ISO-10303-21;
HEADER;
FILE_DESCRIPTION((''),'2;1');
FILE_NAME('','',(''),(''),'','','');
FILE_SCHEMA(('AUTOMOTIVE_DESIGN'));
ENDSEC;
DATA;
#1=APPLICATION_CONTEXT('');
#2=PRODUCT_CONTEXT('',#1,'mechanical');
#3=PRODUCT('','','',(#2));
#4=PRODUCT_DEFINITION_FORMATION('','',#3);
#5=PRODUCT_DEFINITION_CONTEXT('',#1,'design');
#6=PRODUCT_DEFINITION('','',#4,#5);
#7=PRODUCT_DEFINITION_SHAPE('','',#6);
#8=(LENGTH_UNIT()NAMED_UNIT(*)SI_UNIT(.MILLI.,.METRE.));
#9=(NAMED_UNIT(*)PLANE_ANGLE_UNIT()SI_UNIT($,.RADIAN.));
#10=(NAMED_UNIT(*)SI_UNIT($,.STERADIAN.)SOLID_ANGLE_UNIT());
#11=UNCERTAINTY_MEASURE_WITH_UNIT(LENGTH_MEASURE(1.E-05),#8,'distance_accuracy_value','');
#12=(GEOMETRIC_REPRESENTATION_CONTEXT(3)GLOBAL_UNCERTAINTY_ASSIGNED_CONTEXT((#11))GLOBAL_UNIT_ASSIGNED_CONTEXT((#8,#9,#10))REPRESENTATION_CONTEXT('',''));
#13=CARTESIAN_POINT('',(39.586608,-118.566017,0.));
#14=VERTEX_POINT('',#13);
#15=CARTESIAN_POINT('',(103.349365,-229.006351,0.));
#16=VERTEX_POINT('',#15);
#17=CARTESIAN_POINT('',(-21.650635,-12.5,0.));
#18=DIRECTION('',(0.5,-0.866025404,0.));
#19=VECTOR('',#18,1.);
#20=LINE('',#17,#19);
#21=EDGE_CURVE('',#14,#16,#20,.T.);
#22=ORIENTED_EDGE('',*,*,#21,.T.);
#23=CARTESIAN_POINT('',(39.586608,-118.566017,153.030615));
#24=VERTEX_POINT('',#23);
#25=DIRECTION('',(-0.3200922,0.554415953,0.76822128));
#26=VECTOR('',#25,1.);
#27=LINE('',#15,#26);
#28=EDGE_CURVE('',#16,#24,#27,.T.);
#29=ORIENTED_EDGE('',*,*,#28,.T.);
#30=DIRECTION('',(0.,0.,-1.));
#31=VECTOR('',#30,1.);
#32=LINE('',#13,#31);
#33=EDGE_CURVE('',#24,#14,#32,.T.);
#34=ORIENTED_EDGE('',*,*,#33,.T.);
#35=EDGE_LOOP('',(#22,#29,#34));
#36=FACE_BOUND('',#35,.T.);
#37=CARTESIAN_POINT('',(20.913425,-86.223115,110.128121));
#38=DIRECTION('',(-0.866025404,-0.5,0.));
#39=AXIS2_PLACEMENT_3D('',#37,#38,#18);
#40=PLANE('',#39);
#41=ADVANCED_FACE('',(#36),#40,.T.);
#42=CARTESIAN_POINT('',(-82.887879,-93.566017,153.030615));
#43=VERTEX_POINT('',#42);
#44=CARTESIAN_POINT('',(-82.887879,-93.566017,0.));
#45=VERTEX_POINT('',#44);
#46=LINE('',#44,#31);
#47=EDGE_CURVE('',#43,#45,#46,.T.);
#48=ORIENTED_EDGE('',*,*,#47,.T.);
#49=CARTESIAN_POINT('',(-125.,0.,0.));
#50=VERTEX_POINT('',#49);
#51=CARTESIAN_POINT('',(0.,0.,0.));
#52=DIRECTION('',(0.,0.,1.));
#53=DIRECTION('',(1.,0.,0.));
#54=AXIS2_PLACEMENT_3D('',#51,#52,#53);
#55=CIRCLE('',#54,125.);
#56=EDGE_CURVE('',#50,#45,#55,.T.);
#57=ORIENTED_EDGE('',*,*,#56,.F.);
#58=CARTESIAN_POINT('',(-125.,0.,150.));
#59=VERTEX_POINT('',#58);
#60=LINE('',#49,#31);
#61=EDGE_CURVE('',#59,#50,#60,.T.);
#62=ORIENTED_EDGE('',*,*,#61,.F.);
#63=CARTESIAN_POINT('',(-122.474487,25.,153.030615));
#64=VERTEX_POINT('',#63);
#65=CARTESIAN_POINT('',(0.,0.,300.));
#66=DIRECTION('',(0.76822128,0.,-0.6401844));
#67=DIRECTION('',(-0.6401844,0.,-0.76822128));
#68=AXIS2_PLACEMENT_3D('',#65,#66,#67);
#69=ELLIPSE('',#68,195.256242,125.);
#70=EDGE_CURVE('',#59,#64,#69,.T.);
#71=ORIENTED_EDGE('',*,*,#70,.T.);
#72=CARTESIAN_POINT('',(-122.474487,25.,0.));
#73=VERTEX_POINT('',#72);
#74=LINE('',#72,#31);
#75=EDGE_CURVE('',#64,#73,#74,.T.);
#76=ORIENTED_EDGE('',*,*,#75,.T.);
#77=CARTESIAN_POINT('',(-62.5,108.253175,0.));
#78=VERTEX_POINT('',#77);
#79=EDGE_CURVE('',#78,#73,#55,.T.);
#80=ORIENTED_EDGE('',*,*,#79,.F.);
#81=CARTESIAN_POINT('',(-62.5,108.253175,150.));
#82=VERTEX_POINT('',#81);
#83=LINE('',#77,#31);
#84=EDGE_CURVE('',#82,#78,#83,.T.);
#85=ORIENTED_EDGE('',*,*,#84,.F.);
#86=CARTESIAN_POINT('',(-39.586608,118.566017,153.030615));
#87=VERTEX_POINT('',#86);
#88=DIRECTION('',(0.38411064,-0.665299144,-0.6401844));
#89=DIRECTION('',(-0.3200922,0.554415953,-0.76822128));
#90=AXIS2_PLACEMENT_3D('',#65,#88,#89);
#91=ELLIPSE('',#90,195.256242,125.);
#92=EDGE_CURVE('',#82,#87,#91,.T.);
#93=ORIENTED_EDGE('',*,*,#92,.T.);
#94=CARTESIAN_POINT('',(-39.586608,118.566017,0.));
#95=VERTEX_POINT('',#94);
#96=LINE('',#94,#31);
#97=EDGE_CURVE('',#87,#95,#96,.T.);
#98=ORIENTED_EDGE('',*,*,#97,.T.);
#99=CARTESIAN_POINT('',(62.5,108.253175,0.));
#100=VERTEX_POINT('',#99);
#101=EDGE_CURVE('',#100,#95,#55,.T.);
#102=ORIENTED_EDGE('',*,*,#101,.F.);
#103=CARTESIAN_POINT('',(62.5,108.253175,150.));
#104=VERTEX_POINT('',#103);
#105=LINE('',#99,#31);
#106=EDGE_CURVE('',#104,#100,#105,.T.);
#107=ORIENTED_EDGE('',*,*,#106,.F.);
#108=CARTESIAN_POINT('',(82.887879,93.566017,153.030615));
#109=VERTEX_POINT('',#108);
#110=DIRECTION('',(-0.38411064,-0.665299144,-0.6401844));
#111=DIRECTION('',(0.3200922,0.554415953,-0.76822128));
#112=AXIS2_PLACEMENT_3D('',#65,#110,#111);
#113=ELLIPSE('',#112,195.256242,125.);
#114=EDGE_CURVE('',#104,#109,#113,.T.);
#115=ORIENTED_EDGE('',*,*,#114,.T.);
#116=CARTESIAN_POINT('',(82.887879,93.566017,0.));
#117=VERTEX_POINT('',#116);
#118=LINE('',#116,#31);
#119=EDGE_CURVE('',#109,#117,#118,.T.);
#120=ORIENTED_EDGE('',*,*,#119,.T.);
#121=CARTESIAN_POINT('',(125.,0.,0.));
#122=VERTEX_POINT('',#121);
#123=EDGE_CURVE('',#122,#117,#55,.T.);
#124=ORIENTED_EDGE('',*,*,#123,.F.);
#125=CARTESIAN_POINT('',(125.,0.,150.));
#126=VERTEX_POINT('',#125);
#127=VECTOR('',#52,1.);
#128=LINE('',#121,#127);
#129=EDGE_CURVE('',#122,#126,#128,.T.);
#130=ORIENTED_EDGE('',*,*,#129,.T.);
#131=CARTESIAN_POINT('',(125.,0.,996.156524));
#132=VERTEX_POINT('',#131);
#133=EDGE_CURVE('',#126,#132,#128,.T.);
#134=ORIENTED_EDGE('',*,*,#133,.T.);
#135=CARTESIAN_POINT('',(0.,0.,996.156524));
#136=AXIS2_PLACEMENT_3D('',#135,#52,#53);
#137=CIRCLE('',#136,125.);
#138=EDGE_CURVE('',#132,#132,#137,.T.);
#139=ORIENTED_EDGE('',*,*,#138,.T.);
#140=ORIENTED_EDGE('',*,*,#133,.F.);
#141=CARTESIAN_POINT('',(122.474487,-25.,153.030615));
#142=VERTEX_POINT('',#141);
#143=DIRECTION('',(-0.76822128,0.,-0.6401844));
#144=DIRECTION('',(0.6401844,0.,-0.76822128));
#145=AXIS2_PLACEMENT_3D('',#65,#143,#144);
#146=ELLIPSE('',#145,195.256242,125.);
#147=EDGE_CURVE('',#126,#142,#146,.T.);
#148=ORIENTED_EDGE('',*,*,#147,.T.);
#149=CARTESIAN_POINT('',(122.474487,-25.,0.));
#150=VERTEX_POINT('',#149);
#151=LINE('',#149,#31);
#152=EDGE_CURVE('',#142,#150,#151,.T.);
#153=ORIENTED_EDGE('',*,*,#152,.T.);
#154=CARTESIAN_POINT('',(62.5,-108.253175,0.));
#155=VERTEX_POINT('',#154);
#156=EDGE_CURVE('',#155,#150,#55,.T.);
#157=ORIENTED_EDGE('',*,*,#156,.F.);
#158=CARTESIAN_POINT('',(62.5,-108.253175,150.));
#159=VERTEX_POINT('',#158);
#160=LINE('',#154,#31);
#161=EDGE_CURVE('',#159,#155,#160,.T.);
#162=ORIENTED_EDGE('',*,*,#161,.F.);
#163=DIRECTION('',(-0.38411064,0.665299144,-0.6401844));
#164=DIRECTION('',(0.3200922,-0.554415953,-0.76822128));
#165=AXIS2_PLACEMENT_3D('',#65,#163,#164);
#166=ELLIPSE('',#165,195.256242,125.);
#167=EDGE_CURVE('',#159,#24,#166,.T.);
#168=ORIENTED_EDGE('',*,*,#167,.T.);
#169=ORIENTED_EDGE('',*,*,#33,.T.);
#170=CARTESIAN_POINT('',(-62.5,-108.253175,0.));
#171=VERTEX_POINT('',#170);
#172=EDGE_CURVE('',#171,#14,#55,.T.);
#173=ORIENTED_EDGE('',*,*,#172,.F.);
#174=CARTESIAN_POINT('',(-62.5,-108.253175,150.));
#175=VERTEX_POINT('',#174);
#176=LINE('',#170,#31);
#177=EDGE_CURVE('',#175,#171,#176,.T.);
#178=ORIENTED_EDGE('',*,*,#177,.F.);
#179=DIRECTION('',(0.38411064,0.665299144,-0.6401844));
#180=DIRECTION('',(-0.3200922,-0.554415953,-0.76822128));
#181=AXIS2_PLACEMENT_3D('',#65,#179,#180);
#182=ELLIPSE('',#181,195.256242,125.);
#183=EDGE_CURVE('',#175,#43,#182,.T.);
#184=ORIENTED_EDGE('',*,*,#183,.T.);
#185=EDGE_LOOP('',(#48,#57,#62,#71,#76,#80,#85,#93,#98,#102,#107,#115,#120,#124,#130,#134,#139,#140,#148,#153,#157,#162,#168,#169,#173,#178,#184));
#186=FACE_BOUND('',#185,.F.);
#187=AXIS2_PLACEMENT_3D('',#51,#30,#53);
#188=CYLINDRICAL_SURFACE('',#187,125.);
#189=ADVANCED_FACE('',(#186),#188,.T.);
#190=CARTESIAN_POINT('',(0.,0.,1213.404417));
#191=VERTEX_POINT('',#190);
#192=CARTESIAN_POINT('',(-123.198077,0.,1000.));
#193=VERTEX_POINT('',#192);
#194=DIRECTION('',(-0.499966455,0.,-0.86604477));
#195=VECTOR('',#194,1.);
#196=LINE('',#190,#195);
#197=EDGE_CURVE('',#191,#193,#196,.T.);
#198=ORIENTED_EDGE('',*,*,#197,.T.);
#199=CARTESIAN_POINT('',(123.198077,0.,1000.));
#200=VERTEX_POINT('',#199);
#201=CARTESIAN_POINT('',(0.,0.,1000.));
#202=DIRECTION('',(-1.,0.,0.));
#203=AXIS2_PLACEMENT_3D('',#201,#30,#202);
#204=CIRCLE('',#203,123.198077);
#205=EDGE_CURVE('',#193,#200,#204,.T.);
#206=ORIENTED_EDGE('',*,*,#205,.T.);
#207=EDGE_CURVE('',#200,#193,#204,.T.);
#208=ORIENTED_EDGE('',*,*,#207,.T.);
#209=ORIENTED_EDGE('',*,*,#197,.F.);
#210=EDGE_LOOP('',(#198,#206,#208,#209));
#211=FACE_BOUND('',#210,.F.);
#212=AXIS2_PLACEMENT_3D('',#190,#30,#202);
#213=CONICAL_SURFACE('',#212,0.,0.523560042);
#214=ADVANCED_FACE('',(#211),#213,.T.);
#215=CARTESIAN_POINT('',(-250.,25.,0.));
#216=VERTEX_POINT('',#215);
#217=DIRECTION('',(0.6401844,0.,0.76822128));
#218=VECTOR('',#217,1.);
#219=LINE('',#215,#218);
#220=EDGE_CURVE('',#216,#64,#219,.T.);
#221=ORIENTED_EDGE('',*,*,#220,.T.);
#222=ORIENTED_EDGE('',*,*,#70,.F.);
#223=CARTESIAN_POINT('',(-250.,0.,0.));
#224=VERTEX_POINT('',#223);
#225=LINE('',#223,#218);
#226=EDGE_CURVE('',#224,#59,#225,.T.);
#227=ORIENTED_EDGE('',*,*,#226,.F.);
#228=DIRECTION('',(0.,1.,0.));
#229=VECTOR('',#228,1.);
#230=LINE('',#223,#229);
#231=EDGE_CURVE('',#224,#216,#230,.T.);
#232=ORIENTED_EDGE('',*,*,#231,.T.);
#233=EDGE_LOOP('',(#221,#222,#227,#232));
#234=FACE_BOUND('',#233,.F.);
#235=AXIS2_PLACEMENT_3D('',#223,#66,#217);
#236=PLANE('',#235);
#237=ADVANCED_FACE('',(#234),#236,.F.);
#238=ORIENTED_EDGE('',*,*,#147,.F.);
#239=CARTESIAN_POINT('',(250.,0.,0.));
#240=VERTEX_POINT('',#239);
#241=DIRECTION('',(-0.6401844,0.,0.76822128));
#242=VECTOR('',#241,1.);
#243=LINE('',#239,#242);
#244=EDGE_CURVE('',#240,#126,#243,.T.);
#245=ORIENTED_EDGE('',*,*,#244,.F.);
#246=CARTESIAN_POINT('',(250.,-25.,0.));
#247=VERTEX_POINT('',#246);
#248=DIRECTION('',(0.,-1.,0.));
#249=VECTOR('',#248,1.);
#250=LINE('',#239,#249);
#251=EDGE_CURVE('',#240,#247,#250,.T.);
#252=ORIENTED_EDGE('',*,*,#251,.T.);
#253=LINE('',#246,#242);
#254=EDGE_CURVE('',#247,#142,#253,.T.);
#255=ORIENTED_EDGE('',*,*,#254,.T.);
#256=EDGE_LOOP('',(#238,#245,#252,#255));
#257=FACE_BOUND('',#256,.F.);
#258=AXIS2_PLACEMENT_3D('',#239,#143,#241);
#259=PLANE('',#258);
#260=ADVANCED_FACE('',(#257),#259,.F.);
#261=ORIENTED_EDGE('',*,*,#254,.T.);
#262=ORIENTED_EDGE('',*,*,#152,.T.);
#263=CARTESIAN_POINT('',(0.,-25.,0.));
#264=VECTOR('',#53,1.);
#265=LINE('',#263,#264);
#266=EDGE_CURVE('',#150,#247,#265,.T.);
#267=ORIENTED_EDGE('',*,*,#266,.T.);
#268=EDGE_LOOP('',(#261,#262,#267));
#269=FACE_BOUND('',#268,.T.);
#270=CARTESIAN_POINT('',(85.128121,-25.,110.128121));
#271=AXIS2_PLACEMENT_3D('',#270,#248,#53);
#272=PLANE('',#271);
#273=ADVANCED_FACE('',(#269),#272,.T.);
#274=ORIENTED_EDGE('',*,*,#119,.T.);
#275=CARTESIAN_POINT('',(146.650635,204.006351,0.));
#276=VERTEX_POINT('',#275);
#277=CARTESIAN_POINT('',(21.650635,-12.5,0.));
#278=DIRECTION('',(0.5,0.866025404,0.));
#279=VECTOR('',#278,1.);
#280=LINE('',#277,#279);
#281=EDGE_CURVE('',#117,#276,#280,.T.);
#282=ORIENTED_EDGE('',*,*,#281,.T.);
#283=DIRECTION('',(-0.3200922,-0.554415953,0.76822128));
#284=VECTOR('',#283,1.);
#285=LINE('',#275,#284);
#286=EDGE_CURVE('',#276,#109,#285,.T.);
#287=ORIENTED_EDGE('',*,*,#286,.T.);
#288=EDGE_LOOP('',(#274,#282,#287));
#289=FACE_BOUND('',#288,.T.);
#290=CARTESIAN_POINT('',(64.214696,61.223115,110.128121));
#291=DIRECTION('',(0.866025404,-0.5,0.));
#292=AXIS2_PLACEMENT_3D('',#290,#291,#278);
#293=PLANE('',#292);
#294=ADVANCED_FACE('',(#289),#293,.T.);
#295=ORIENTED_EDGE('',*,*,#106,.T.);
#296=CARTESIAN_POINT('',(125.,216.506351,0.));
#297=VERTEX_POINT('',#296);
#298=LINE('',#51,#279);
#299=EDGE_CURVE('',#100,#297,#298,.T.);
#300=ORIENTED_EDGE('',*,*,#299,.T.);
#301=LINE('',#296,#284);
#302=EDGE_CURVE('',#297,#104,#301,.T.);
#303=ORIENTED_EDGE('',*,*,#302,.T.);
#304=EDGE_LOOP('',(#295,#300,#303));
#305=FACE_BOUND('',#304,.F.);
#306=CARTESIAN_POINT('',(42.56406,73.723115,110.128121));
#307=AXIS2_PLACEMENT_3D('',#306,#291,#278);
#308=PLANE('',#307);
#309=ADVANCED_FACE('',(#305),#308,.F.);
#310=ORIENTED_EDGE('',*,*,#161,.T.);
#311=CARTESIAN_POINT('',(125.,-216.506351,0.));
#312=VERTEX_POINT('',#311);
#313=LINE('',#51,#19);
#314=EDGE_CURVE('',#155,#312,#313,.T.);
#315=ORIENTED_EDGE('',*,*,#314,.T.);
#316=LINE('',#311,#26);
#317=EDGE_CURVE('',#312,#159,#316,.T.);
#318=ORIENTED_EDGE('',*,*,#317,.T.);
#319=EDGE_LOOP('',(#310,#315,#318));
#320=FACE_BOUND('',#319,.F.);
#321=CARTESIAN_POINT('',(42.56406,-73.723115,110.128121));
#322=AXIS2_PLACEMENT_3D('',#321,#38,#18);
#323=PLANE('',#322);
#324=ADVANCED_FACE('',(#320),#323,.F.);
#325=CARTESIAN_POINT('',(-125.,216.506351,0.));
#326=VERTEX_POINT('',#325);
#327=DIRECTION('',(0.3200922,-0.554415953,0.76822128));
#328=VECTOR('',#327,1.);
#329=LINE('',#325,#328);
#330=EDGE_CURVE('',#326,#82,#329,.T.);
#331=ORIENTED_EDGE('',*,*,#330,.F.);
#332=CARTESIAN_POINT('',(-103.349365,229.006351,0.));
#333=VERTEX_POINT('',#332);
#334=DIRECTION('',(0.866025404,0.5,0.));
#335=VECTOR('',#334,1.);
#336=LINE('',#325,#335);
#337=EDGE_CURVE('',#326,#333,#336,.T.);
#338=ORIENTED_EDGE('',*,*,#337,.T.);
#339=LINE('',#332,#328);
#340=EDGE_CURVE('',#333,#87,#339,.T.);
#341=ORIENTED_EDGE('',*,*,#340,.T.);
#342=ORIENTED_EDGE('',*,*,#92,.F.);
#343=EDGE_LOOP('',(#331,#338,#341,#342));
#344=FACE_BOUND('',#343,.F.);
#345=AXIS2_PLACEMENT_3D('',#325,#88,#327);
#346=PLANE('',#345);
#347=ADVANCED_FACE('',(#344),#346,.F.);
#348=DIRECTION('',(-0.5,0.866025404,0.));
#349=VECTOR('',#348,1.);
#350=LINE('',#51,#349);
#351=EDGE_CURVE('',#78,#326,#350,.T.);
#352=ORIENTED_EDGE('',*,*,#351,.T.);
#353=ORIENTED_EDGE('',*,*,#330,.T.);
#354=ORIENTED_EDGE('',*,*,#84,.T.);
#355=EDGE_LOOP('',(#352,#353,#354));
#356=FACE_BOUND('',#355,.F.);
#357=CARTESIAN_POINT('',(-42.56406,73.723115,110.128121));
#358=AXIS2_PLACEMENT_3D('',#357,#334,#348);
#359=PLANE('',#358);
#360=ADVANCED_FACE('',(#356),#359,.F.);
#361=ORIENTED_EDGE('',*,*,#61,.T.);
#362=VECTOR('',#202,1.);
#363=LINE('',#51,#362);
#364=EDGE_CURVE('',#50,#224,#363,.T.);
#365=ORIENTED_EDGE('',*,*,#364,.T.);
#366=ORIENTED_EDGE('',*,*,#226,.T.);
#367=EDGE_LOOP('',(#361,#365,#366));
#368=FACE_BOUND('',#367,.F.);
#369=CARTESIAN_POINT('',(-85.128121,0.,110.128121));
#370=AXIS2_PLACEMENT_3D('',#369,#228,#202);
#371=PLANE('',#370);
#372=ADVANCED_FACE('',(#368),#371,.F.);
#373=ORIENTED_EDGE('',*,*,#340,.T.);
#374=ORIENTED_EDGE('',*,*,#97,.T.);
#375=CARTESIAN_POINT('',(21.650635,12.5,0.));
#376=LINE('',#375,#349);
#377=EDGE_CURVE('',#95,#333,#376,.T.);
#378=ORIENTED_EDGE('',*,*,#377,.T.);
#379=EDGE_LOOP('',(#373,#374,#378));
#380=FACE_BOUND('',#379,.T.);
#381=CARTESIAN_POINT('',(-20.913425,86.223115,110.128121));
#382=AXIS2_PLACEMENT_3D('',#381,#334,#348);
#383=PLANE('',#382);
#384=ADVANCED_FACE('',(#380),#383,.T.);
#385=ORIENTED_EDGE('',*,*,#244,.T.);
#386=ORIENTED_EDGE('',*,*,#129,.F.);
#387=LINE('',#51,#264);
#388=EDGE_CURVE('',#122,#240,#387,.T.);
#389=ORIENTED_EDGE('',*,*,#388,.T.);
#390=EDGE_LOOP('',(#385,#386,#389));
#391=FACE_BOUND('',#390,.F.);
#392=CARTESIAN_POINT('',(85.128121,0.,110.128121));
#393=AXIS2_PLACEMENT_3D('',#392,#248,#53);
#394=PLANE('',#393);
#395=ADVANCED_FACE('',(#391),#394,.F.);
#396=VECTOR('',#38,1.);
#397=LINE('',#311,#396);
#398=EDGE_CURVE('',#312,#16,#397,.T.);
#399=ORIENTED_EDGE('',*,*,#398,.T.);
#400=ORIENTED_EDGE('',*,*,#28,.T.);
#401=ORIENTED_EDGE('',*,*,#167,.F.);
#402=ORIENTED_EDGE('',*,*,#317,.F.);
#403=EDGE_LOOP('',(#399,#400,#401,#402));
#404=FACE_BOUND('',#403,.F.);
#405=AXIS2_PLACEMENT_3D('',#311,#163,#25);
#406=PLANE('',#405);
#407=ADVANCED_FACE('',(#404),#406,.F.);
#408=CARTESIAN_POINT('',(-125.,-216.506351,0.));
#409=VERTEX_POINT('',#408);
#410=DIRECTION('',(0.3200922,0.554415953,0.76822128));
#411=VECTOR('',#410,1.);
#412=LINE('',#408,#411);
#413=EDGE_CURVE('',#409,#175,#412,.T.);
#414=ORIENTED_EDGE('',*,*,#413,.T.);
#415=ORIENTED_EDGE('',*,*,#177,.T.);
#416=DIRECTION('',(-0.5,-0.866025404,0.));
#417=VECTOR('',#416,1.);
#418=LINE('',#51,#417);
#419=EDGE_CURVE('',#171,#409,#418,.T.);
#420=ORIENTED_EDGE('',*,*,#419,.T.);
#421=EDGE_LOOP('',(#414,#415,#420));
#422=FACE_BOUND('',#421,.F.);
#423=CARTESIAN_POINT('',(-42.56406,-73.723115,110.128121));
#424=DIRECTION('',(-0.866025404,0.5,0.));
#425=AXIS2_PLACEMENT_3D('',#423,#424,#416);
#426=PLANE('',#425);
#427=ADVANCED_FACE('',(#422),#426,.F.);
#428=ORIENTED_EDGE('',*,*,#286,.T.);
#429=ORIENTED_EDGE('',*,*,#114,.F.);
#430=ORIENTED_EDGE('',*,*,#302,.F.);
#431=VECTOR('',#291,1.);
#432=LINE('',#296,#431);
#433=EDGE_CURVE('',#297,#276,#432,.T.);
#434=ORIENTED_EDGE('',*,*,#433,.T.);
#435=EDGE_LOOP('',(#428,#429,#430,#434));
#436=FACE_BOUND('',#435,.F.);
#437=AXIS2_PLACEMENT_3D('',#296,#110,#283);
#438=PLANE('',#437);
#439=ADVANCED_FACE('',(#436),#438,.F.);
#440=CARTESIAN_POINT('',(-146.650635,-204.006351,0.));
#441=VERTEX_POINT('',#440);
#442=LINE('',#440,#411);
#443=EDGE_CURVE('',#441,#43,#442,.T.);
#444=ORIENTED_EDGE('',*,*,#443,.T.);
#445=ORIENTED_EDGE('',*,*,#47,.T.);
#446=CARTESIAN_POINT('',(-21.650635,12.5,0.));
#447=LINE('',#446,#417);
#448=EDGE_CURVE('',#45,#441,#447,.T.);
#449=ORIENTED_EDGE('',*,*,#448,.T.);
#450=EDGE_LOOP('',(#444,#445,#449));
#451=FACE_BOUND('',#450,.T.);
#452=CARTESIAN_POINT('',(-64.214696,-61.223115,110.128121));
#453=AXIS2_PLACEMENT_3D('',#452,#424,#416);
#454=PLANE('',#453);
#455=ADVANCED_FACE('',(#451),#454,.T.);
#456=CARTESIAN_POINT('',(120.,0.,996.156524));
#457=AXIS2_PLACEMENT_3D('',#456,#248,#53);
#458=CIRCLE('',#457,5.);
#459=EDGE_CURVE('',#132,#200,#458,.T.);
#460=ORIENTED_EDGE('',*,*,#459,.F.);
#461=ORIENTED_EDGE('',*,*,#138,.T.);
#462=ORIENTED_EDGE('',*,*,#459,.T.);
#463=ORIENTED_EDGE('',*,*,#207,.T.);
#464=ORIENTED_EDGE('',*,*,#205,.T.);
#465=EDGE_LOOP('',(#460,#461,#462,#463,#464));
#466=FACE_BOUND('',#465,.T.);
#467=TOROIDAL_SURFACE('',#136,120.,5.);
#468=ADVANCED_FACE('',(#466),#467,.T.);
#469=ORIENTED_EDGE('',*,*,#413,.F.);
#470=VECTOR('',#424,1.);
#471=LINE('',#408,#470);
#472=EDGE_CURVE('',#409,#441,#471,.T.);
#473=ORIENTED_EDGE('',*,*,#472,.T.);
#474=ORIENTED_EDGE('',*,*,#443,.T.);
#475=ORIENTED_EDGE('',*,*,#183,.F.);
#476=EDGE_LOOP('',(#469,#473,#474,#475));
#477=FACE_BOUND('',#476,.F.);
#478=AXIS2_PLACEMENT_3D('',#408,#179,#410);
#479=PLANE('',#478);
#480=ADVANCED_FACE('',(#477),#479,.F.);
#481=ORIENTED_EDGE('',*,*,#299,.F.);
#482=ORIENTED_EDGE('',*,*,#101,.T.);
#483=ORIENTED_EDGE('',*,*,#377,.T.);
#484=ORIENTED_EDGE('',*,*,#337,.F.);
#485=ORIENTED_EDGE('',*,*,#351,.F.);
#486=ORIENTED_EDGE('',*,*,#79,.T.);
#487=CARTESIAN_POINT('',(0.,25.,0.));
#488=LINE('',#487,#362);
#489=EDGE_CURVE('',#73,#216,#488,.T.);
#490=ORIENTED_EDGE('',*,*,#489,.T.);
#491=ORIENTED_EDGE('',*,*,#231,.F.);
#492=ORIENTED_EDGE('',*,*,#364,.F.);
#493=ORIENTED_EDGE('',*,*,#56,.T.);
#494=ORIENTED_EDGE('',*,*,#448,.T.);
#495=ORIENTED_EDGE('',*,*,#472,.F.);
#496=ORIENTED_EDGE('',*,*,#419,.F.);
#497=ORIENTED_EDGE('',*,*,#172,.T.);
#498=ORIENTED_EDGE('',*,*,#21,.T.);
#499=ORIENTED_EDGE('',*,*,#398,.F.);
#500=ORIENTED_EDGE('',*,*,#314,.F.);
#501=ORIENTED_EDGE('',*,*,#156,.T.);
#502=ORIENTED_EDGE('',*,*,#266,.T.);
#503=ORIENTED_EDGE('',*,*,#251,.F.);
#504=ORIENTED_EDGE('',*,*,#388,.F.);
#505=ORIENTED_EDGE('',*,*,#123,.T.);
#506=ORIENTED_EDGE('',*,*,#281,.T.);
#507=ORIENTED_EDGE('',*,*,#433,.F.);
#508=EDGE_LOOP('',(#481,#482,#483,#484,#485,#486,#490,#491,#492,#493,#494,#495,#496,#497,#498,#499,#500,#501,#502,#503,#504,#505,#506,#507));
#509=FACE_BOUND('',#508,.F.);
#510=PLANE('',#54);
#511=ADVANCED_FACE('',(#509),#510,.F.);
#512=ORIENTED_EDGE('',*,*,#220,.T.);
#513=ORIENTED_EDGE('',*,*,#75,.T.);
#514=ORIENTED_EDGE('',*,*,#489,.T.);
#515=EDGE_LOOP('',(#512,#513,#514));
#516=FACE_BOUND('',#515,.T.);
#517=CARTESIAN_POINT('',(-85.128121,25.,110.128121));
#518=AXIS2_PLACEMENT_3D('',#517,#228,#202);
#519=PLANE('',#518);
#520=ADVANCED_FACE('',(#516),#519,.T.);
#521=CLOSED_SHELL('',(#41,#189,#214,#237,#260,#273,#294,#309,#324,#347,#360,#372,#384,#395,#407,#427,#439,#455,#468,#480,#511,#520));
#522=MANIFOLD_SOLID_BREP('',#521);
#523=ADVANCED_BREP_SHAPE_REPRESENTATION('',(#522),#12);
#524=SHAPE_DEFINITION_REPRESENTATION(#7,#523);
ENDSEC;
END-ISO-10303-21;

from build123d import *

# Parameters (mm, degrees)
F0_R            = 125
F1_DEPTH        = 1000
F6_DEPTH        = 25
F6_COPIES_COUNT = 6


# Not quite as in the source:
# - a fillet or chamfer that OpenCascade refuses, or shapes differently, is made with other operations: its cross-section is extruded or revolved along the edge and cut away or added
# - a pattern or mirror of a feature is missing from the dataset's text; its kind, count and spacing are read off the source's solid


with BuildPart() as f1:
    # F0 (on Top) → F1 (new body)
    with BuildSketch(Plane.XY):
        Circle(F0_R)
    extrude(amount=F1_DEPTH)

    # F2 (on Front) → F3 (revolve)
    with BuildSketch(Plane.XZ):
        Polygon((-124.5536804199, 997.6518154144), (0, 998.6120462418), (0, 1213.404417038), align=None)
    revolve(axis=Axis((0, 0, 1106.0082316399), (0, 0, 1)))

    # F4: fillet of radius 5 on 1 edges, made by hand

    # F4_s1 → F4_t2 (revolve, cut)
    with BuildSketch(Plane.XZ):
        with BuildLine():
            ThreePointArc((125, 996.1565242927), (124.5271615516, 998.2789776575), (123.1980766857, 1000))
            Line((123.1980766857, 1000), (125, 1000))
            Line((125, 1000), (125, 996.1565242927))
        make_face()
    revolve(axis=Axis((0, 0, 1000), (0, 0, 1)), mode=Mode.SUBTRACT)

    # F5 (on Front) → F6 (join)
    with BuildSketch(Plane.XZ):
        Polygon((0, 300), (0, 0), (250, 0), align=None)
    f6 = extrude(amount=F6_DEPTH)

    # F6_copies: F6 ×6 about axis
    f6_copies_axis = Axis((0, 0, 0), (0, 0, 1))
    for i in range(1, F6_COPIES_COUNT):
        add(f6.rotate(f6_copies_axis, i * 360 / F6_COPIES_COUNT))


solid = f1.part
